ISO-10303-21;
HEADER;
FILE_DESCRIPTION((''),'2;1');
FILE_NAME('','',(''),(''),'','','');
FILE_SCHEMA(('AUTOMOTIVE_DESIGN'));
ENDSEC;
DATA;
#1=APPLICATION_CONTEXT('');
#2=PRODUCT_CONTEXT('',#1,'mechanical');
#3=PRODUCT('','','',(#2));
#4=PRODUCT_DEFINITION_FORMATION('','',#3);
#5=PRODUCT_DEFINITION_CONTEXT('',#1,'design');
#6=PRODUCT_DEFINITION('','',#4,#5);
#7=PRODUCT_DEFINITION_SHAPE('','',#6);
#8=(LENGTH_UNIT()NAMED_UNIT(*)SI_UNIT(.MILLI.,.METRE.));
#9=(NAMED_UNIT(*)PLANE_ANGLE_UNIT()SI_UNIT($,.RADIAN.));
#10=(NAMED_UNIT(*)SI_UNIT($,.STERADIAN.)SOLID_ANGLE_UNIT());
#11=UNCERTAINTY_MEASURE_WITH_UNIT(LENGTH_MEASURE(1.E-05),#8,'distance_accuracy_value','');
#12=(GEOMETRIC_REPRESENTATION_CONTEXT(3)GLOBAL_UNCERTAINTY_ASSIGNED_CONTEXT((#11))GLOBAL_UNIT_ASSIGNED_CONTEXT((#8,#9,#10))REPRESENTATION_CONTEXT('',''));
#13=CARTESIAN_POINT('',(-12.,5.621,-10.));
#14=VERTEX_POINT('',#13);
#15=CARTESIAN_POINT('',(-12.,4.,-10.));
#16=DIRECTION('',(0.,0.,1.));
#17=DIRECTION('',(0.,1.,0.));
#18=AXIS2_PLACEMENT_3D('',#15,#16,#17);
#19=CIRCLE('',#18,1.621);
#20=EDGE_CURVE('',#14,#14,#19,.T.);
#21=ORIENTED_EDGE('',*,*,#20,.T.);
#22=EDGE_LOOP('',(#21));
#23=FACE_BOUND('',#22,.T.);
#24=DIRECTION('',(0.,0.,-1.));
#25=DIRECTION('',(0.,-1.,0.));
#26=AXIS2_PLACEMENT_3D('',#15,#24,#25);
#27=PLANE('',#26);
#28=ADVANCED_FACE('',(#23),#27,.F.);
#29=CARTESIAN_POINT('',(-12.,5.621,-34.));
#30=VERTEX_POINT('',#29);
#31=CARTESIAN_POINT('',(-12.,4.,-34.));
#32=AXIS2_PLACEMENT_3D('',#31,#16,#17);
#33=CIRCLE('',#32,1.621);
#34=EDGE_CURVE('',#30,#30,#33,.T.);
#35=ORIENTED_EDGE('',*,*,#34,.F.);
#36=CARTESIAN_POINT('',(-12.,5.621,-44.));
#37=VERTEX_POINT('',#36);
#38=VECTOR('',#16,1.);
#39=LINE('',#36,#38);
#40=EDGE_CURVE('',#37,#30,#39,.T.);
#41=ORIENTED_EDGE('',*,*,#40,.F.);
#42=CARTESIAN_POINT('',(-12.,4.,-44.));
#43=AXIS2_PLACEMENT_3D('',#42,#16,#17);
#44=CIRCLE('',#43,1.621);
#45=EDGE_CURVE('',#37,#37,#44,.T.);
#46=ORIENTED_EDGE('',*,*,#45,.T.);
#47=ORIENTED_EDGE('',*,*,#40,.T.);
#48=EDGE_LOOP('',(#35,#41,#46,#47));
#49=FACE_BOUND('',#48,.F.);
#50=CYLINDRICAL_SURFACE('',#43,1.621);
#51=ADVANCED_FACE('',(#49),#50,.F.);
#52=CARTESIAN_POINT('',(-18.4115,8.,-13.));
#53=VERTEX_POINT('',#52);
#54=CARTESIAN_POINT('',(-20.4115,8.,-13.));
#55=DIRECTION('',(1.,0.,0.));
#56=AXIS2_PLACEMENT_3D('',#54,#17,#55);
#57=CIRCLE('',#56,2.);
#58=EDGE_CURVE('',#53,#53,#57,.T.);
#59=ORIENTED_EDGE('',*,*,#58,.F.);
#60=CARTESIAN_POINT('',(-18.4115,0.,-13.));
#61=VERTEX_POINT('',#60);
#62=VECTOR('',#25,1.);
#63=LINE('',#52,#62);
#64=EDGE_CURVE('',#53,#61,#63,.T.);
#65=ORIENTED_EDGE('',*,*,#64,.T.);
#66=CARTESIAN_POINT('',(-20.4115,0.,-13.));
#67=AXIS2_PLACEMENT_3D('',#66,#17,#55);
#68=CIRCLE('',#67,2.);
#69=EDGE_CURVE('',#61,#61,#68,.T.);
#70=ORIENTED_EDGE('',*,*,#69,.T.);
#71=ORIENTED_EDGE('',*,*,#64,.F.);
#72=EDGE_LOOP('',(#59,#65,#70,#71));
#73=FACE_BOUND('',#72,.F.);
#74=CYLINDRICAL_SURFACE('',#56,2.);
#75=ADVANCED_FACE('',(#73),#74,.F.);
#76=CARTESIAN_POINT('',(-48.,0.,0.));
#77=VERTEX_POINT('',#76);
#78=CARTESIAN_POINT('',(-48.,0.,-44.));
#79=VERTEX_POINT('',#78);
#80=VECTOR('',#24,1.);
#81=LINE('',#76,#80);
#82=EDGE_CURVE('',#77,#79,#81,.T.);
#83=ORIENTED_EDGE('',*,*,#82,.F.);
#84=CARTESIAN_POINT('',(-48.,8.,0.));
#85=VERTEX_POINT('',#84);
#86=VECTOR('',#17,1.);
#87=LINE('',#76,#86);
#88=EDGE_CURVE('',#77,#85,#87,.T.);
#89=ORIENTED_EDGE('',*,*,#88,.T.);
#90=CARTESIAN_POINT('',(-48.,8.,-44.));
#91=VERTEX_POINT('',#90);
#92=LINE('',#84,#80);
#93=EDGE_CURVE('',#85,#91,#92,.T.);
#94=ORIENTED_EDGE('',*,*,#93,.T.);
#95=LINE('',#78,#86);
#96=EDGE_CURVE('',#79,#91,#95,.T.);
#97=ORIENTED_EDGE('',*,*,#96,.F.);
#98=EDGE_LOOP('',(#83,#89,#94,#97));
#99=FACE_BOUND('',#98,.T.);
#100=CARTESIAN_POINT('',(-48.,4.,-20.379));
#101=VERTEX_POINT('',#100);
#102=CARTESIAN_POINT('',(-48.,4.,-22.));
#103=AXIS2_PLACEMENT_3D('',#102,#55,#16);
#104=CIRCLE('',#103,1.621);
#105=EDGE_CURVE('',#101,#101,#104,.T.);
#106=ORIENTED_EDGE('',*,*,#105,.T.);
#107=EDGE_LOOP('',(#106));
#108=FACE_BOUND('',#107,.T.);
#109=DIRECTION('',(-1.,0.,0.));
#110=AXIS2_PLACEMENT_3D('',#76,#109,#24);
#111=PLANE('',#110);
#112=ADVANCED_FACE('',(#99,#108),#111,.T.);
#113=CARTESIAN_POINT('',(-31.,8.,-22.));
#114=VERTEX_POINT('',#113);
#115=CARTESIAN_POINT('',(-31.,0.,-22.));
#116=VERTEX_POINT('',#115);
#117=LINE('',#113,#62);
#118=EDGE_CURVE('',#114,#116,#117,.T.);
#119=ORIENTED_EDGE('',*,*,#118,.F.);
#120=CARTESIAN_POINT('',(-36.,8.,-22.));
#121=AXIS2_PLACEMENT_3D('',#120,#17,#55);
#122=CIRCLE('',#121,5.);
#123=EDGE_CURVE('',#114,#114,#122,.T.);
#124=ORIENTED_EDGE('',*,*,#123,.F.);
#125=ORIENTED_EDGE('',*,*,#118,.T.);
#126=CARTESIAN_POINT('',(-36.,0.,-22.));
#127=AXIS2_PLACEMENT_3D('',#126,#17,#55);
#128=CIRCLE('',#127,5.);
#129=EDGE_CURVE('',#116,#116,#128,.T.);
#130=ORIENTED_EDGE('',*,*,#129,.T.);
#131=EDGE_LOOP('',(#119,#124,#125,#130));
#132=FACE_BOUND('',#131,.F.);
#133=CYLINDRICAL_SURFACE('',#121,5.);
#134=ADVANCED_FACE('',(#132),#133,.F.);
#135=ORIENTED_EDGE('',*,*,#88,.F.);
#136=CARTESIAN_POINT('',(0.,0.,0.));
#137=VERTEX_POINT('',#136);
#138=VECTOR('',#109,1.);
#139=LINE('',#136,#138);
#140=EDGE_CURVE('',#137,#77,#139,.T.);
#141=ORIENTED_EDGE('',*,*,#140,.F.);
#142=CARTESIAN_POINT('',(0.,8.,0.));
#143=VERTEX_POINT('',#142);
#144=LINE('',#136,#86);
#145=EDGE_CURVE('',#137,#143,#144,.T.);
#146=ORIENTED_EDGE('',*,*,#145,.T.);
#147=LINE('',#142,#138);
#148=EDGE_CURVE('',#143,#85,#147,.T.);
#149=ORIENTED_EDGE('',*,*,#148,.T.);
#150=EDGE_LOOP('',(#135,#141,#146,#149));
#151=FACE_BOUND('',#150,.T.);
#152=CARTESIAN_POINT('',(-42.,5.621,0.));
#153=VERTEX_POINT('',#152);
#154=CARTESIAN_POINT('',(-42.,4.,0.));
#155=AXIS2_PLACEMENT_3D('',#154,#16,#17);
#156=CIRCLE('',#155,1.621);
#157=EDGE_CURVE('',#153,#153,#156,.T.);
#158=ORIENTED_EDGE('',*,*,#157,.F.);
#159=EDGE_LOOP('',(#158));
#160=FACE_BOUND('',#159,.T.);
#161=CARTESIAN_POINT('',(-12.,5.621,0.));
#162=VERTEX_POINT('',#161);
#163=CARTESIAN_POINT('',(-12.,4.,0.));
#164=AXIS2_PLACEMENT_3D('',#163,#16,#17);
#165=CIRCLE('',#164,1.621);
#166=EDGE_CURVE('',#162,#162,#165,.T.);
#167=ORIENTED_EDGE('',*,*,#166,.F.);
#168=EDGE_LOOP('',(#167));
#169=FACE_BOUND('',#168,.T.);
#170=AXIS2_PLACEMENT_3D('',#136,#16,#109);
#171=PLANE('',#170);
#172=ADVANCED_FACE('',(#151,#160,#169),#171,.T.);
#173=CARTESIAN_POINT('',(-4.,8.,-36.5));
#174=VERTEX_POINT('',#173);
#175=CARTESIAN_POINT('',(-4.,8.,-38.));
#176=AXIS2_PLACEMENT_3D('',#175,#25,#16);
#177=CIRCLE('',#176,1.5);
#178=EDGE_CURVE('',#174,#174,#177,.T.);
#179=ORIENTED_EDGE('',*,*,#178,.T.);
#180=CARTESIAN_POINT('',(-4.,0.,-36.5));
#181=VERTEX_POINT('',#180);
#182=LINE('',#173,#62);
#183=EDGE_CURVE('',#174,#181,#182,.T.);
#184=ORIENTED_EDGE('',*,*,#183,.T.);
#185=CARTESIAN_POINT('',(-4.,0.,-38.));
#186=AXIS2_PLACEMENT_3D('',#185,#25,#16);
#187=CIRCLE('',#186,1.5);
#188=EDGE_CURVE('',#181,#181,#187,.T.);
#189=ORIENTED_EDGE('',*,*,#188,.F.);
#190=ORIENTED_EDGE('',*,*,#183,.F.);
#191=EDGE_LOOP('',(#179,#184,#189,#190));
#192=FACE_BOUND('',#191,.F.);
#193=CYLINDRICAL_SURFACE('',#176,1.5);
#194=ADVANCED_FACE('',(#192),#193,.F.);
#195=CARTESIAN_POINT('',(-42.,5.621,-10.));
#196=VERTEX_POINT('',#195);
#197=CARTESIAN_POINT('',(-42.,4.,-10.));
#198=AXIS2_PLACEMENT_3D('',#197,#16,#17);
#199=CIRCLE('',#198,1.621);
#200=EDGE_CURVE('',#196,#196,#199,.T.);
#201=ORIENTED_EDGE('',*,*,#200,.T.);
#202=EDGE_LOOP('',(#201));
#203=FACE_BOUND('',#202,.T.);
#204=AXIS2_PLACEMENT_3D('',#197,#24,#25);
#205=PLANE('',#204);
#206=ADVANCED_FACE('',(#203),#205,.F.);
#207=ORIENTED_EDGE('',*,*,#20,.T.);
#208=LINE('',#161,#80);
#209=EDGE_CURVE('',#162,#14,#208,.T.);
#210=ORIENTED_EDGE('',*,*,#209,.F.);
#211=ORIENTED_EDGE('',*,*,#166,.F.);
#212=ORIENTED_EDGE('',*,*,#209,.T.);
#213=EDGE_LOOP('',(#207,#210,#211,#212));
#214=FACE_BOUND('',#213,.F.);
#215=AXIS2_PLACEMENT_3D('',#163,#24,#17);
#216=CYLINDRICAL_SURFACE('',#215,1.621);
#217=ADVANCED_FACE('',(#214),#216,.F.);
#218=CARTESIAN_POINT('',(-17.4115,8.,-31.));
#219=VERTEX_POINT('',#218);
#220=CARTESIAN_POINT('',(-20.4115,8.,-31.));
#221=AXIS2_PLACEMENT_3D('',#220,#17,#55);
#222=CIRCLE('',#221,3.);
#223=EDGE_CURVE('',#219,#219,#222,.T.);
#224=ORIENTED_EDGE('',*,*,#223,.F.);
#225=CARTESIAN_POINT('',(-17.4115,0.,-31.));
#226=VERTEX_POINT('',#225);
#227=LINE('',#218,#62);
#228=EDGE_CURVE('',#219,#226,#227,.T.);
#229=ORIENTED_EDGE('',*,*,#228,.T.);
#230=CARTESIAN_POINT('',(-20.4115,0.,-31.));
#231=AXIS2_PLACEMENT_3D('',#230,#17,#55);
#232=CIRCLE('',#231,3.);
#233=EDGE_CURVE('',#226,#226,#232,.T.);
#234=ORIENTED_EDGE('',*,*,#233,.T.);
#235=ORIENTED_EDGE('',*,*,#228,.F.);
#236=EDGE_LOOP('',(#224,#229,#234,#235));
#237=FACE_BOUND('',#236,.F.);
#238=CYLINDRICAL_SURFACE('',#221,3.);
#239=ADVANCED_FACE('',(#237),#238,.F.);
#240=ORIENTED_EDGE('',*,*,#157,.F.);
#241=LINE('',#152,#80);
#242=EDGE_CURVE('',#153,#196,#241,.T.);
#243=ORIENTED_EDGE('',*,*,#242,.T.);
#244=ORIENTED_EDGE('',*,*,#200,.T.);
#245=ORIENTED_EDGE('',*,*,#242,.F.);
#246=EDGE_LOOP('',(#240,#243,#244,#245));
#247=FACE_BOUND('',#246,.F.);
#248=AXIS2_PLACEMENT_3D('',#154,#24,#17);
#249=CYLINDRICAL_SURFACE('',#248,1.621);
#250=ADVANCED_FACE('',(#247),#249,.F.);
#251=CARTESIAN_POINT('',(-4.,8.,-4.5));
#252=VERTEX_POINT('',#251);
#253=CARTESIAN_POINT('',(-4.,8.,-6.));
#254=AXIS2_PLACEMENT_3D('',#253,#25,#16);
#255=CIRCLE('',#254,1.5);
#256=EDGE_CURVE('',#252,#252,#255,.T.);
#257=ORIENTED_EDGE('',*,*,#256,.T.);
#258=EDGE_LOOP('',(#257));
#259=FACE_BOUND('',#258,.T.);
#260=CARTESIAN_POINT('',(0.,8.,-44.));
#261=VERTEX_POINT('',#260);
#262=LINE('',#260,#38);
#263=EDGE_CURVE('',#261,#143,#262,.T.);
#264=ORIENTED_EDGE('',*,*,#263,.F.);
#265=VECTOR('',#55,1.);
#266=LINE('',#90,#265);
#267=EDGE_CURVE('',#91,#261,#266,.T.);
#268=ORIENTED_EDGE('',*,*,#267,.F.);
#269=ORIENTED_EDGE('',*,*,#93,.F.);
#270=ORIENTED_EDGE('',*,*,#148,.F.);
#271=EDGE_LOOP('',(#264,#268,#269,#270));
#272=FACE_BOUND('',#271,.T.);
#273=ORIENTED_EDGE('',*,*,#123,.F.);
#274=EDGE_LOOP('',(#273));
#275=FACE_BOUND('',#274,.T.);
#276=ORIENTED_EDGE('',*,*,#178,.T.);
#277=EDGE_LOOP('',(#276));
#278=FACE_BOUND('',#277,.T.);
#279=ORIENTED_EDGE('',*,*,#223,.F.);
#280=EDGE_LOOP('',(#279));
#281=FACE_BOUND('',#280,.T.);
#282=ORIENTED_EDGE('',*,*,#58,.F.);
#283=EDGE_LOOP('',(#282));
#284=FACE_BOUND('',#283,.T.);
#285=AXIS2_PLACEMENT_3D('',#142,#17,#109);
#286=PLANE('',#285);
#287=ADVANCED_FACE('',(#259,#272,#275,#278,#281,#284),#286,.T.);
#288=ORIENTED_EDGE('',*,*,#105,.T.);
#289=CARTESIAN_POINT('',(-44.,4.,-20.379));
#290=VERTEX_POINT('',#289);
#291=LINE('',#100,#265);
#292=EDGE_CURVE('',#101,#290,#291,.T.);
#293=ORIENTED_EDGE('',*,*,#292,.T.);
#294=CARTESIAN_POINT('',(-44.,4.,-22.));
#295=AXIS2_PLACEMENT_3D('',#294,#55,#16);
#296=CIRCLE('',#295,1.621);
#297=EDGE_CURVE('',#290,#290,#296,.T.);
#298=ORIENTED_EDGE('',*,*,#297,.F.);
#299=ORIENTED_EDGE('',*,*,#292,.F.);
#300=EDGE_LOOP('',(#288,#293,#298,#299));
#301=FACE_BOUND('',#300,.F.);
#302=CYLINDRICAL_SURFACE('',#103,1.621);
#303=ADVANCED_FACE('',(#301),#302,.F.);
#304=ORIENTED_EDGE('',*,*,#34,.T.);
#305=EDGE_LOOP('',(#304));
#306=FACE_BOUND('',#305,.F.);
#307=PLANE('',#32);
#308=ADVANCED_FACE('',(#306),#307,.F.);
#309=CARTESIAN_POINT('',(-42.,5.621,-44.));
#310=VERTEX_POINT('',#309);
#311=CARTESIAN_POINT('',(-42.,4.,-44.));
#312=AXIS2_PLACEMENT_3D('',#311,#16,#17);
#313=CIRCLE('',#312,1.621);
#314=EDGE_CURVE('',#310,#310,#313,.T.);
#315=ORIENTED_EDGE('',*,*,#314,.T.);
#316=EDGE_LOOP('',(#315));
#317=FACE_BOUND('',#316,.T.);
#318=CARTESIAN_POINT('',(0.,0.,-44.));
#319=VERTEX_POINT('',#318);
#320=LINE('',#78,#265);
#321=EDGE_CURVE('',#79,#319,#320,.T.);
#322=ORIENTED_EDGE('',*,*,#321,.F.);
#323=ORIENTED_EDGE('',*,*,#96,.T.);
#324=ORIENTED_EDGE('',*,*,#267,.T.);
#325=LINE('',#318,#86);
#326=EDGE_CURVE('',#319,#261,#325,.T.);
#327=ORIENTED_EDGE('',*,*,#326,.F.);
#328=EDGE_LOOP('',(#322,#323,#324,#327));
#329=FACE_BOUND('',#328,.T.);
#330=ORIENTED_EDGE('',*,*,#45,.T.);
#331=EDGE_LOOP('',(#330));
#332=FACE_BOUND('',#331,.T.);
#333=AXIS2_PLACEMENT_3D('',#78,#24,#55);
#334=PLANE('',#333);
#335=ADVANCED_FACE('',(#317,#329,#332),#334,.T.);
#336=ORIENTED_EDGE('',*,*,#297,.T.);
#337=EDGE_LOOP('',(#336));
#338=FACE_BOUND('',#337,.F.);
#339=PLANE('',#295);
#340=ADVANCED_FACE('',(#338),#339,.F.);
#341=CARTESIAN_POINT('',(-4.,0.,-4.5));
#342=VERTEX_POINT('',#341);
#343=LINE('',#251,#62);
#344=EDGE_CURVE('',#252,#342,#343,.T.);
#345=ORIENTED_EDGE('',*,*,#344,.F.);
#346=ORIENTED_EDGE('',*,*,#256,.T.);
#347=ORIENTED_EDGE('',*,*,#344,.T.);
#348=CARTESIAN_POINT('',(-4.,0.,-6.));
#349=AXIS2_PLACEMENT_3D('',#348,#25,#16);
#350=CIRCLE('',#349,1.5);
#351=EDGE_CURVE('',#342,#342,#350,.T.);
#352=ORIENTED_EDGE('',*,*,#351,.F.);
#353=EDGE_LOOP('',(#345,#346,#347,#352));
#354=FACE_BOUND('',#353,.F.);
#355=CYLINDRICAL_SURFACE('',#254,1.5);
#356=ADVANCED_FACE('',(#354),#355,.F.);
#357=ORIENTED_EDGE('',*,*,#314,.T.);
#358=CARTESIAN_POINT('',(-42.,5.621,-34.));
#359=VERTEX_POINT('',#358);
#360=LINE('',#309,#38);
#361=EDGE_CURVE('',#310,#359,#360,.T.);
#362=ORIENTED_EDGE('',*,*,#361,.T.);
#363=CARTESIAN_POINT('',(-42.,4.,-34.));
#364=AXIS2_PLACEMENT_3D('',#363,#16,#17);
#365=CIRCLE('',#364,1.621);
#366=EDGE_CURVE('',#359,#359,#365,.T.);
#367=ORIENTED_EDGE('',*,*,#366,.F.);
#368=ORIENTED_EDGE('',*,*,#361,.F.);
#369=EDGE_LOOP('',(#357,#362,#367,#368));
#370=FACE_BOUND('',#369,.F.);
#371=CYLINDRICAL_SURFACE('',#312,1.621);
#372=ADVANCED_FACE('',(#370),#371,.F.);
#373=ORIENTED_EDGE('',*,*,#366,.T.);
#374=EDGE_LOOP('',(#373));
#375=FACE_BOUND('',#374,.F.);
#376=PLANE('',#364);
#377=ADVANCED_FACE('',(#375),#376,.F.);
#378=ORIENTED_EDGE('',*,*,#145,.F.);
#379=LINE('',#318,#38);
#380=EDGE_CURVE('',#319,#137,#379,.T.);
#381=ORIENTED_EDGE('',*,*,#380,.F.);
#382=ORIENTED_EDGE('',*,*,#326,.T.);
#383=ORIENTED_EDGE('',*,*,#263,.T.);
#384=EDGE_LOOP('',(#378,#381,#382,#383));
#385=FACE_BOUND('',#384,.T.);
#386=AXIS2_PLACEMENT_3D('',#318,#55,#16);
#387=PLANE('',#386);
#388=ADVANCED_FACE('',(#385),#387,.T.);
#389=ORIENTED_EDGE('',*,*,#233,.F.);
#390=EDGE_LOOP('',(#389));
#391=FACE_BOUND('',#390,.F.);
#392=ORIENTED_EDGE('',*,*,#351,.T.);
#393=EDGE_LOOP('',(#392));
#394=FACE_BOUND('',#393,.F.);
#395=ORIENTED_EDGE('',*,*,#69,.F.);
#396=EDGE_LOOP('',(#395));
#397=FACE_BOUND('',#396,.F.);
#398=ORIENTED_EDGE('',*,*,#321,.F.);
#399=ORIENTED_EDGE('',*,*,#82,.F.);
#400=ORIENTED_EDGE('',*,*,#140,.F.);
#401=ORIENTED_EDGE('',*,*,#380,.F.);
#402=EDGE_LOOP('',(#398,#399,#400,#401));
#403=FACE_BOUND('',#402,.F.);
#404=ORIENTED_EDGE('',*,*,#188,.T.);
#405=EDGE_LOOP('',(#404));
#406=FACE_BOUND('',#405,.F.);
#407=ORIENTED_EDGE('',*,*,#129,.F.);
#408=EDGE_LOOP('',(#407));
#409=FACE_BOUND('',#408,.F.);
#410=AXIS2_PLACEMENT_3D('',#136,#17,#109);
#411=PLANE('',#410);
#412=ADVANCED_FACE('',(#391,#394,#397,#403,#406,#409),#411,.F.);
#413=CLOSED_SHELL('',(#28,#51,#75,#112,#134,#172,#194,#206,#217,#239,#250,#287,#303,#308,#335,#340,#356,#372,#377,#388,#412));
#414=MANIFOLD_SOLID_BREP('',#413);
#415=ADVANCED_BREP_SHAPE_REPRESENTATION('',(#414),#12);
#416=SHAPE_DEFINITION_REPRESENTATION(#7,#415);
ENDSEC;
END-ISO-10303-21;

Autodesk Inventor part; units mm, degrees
ref_plane "YZ Plane" through (0, 0, 0) normal (1, 0, 0) x (0, 1, 0)
ref_plane "XZ Plane" through (0, 0, 0) normal (0, 1, 0) x (-1, 0, 0)
sketch "Skizze1" plane through (0, 0, 0) normal (0, 1, 0) x (-1, 0, 0)
  line L0 (0, 0) -> (48, 0)
  line L1 (48, 0) -> (48, -44)
  line L2 (48, -44) -> (0, -44)
  line L3 (0, -44) -> (0, 0)
  dimension "d0" = 44
  dimension "d1" = 48
extrude "Extrusion1" add sketch "Skizze1" along normal blind 8
sketch "Skizze2" plane through (0, 8, 0) normal (0, 1, 0) x (1, 0, 0)
  circle A0 centre (-36, 22) radius 5
  circle A1 centre (-20.4115, 13) radius 2
  circle A2 centre (-20.4115, 31) radius 3
  line L0 (0, 0) -> (0, 44) projected
  line L1 (0, 22) -> (-47.9314, 22) construction
  line L2 (-48, 44) -> (-48, 0) projected
  dimension "d4" = 9
  dimension "d5" = 12
  dimension "d6" = 10
  dimension "d7" = 18
  dimension "d8" = 4
  dimension "d9" = 6
extrude "Extrusion2" cut sketch "Skizze2" against normal up to surface (8 mm away)
sketch "Skizze3" plane through (-48, 0, -44) normal (-1, 0, 0) x (0, 0, 1)
  line L0 (44, 0) -> (44, 8) projected
  line L1 (0, 0) -> (44, 0) projected
  point P0 (22, 4)
  point P1 (44, 4)
  point P2 (22, 0)
hole "Bohrung1" at (-48, 4, -22) direction (1, 0, 0) diameter 3.242 depth 4 thread size "M4x0.7" class "6H" standard "ISO Metric profile"
sketch "Skizze4" plane through (0, 8, 0) normal (0, 1, 0) x (1, 0, 0)
  line L0 (0, 0) -> (0, 44) projected
  line L1 (-48, 0) -> (0, 0) projected
  point P0 (-4, 6)
  point P1 (-4, 38)
  dimension "d26" = 4
  dimension "d27" = 6
  dimension "d28" = 32
hole "Bohrung2" at (-4, 8, -6) at (-4, 8, -38) direction (0, -1, 0) diameter 3 depth 8
sketch "Skizze5" plane through (0, 0, -44) normal (0, 0, -1) x (-1, 0, 0)
  line L0 (48, 0) -> (48, 8) projected
  line L1 (0, 0) -> (0, 8) projected
  point P0 (12, 4)
  point P1 (42, 4)
  point P2 (48, 4)
  dimension "d36" = 30
  dimension "d37" = 12
hole "Bohrung3" at (-12, 4, -44) at (-42, 4, -44) direction (0, 0, 1) diameter 3.242 depth 10 thread size "M4x0.7" class "6H" standard "ISO Metric profile"
ref_plane "Arbeitsebene1" through (0, 0, -22) normal (0, 0, 1) x (1, 0, 0)
mirror "Spiegeln1" about plane through (0, 0, -22) normal (0, 0, 1) of "Bohrung3"
properties part number "1014"
